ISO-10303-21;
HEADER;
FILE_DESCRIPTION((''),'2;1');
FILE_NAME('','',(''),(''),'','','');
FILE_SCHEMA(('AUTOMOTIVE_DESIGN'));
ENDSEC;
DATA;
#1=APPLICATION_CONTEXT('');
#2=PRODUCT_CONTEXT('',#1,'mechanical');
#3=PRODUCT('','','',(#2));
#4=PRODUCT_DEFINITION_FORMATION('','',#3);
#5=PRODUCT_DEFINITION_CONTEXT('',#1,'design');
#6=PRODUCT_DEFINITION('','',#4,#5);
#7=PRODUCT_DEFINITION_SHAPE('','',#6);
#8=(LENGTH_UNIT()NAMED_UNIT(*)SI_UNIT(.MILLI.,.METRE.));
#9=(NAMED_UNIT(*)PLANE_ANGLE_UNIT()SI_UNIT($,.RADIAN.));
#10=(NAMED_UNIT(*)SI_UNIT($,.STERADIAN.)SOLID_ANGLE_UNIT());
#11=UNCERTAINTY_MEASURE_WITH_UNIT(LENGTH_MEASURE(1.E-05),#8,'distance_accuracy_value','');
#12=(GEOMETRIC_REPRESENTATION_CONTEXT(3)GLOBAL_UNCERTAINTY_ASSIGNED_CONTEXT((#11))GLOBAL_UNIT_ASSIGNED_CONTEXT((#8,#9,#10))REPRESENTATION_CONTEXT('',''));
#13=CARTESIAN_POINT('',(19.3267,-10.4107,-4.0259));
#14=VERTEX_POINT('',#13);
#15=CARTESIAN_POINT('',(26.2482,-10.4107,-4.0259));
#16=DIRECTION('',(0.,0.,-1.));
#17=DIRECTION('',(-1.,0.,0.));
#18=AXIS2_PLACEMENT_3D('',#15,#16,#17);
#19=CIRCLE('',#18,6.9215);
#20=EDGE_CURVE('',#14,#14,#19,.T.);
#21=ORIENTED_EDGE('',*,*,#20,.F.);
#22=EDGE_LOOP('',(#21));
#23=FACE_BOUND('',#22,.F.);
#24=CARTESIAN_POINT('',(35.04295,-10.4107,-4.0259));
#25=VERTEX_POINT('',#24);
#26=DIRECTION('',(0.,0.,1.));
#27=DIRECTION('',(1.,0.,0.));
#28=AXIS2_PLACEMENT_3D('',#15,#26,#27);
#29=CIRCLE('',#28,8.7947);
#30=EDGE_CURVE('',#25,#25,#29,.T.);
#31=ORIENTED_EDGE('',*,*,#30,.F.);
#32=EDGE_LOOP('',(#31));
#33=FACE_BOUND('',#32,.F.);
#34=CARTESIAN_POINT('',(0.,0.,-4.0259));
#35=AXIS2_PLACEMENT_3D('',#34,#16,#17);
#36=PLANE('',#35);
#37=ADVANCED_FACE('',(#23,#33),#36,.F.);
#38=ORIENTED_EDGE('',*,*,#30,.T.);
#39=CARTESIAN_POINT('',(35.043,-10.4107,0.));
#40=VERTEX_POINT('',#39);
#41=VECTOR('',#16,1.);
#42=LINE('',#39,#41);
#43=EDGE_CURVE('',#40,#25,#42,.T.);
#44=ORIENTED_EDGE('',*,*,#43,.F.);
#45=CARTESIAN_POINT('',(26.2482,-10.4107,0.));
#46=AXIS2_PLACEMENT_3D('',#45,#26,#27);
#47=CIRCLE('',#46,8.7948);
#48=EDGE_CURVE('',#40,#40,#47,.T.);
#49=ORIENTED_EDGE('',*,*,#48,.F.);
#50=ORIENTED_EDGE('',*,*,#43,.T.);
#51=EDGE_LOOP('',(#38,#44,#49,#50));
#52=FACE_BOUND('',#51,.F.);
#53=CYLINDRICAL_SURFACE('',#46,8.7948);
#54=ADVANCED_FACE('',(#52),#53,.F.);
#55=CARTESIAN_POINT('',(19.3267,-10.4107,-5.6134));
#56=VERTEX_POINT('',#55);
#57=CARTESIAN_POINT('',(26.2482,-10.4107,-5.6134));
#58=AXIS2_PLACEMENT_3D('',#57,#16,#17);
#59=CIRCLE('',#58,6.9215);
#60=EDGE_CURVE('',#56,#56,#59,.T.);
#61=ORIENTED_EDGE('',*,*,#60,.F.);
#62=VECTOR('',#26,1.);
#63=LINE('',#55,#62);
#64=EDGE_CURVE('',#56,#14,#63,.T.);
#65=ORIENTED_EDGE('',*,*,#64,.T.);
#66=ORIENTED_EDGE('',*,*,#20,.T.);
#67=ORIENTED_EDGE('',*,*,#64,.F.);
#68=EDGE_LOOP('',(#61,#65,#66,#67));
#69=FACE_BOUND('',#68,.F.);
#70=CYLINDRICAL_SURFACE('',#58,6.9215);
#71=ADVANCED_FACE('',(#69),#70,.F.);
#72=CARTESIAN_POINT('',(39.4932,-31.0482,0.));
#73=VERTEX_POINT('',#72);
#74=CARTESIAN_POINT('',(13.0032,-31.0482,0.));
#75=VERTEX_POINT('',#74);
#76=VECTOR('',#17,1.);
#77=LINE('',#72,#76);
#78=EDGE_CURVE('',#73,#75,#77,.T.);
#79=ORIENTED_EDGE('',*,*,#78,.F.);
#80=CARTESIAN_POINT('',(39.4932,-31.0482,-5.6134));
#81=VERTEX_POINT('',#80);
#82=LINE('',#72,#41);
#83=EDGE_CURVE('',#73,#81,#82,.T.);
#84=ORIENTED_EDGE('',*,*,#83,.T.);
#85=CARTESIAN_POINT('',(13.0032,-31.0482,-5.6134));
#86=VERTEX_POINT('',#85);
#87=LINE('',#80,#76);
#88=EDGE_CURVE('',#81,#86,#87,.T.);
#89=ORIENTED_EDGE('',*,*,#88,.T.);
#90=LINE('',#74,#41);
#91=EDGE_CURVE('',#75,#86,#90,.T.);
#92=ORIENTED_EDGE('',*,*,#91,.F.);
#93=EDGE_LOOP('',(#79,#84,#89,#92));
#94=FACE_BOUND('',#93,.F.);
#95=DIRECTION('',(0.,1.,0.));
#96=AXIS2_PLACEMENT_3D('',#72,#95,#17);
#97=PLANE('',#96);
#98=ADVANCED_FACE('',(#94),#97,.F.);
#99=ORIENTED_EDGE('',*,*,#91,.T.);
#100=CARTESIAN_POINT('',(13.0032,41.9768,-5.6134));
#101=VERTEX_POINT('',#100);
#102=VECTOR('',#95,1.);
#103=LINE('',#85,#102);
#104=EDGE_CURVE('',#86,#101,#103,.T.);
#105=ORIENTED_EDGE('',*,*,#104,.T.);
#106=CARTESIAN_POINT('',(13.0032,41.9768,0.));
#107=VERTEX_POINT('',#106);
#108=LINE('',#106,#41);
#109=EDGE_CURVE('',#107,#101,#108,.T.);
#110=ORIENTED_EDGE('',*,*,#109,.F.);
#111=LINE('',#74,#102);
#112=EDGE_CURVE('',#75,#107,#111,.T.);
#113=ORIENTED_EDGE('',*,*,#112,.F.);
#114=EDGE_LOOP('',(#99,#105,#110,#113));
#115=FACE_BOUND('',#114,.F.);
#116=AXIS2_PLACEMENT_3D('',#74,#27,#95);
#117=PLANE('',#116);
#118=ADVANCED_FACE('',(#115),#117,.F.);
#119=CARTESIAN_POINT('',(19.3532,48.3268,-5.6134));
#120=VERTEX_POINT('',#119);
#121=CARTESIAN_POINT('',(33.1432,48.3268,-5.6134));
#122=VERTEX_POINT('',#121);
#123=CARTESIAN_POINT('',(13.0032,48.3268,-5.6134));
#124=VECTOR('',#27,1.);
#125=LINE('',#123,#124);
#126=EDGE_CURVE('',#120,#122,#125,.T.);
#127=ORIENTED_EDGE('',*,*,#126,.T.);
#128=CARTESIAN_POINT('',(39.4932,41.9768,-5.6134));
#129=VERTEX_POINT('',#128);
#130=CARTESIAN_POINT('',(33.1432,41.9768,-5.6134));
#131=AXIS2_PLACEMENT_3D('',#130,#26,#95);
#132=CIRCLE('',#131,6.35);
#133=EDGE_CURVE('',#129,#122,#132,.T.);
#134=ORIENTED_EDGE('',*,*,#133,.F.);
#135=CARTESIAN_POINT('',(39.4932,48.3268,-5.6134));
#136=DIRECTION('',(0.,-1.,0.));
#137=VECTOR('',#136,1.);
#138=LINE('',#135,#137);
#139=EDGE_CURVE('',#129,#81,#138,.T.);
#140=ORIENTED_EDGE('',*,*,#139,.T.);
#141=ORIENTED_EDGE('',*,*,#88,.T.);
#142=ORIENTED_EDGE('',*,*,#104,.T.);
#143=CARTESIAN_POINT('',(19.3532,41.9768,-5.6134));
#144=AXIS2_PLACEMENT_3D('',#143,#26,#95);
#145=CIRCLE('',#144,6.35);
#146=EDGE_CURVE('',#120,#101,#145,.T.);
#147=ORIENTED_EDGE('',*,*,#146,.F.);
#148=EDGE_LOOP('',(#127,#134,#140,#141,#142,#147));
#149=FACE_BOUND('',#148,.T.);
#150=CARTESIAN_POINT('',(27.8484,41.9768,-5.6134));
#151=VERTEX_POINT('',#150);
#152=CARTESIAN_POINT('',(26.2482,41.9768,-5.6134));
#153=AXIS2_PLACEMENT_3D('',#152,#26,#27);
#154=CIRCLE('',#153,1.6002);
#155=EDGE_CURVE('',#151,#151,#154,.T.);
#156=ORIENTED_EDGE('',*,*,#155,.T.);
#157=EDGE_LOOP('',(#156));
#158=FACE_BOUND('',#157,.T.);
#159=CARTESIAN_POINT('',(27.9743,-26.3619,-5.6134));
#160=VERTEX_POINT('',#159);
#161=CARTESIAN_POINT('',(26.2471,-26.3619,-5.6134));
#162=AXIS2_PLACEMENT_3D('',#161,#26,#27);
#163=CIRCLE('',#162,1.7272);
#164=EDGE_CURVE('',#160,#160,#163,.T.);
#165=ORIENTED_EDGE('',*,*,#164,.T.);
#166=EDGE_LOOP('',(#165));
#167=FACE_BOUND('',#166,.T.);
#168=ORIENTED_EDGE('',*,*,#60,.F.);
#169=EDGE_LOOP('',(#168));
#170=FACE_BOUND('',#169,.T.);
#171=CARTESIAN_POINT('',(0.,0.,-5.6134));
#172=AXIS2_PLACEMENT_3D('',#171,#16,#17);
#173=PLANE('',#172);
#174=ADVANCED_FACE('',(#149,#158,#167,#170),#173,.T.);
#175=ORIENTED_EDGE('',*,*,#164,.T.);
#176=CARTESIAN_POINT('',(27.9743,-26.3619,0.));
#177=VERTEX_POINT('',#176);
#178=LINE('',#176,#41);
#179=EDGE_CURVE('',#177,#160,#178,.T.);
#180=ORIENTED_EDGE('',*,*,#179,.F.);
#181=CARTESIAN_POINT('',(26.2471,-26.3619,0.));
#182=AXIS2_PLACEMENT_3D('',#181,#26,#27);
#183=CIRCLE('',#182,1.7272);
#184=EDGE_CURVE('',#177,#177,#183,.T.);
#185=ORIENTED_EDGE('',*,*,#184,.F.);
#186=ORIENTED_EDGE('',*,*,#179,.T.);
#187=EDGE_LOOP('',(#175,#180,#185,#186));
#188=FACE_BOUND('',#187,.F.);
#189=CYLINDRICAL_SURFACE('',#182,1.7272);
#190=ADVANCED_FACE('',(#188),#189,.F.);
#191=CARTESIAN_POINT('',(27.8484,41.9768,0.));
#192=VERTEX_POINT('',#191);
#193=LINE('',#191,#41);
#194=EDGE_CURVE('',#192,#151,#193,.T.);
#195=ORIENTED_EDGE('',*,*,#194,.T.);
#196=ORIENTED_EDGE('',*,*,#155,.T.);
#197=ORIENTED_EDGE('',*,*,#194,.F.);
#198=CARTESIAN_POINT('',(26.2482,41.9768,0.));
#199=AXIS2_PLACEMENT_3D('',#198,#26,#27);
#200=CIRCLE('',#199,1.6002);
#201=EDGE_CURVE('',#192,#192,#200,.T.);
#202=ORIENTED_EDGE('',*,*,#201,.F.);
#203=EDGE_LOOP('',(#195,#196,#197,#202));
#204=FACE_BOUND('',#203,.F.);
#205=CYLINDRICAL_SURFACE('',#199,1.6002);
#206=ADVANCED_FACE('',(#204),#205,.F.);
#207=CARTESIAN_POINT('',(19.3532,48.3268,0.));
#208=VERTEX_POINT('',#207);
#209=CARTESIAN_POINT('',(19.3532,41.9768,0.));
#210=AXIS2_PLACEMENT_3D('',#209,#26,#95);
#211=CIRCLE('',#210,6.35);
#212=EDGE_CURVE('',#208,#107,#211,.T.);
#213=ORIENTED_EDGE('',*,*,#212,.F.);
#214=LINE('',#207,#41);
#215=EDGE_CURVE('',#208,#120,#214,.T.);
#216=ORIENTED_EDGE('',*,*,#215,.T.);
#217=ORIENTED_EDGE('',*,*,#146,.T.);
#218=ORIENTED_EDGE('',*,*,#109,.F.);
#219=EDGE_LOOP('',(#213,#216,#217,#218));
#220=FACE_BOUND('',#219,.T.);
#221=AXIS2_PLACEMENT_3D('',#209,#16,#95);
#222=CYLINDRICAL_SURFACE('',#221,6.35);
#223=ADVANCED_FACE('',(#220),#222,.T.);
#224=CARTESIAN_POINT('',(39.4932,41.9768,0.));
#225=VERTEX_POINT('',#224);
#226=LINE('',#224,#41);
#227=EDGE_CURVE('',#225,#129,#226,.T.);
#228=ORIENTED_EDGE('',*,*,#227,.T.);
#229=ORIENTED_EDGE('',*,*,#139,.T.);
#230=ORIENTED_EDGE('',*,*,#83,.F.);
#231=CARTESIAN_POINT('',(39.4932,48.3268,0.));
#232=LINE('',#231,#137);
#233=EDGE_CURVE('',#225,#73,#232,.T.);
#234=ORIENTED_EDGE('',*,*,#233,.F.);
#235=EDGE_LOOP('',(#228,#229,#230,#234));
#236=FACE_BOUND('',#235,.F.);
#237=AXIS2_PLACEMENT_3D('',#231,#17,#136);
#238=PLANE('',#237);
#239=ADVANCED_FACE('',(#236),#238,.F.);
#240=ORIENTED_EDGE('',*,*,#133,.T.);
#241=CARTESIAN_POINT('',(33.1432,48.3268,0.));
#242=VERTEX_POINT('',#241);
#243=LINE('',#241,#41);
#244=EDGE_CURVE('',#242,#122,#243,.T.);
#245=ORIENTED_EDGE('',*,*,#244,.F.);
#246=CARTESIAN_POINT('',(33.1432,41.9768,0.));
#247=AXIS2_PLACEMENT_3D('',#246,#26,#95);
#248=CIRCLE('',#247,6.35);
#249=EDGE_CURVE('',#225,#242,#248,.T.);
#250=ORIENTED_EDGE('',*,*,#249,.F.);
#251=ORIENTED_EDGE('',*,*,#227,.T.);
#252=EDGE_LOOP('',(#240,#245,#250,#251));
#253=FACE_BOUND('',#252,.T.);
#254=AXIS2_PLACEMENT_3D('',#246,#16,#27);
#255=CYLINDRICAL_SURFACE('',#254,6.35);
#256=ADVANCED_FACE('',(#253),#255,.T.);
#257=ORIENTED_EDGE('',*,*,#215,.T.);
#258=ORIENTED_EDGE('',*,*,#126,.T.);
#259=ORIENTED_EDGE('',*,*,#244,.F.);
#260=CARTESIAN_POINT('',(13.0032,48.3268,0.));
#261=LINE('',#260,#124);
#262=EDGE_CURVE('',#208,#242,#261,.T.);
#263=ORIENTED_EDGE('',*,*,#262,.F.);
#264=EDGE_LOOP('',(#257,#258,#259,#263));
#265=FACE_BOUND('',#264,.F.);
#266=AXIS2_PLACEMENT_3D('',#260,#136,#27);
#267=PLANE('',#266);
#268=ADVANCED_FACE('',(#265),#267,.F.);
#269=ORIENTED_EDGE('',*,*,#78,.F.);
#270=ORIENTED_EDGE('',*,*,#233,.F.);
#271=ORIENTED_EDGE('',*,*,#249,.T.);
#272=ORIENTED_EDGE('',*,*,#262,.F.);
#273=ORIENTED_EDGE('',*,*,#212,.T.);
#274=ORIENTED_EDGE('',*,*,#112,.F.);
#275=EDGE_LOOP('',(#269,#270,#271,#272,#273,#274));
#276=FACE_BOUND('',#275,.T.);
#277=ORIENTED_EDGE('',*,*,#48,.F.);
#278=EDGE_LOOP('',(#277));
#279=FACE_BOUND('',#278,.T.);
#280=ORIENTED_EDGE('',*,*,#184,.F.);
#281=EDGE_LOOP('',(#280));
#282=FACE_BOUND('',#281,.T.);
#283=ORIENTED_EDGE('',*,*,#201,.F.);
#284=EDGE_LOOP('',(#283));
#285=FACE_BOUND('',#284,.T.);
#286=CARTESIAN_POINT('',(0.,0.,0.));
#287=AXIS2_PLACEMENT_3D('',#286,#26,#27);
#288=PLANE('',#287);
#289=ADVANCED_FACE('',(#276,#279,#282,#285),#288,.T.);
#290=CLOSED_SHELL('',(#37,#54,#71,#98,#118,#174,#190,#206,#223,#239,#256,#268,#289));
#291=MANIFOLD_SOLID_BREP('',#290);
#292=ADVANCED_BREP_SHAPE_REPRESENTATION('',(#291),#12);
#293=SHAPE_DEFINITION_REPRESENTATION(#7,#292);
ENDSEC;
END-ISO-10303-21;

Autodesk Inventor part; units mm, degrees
ref_plane "YZ Plane" through (0, 0, 0) normal (1, 0, 0) x (0, 1, 0)
ref_plane "XZ Plane" through (0, 0, 0) normal (0, 1, 0) x (-1, 0, 0)
ref_plane "XY Plane" through (0, 0, 0) normal (0, 0, 1) x (1, 0, 0)
sketch "Sketch1" plane through (0, 0, 0) normal (0, 0, 1) x (1, 0, 0)
  line L0 (18.6455, 5.0782) -> (18.6456, 5.0782)
  circle A0 centre (26.2482, -10.4107) radius 8.7948
  line L1 (39.4932, 48.3268) -> (39.4932, -31.0482)
  line L2 (13.0032, -31.0482) -> (13.0032, 48.3268)
  line L3 (13.0032, 48.3268) -> (39.4932, 48.3268)
  line L4 (39.4932, -31.0482) -> (13.0032, -31.0482)
  circle A1 centre (26.2471, -24.96) radius 1.5875
  point P0 (0, 0)
  dimension "d0" = 17.5895
  dimension "d3" = 26.49
  dimension "d4" = 13.245
  dimension "d5" = 58.7375
  dimension "d6" = 79.375
  dimension "d15" = 3.175
  dimension "d25" = 26.49
  dimension "d26" = 13.2461
extrude "Extrusion1" add sketch "Sketch1" against normal blind 5.6134 contours L1 L4 L2 L3 | A1
sketch "Sketch2" plane through (0, 0, 0) normal (0, 0, 1) x (1, 0, 0)
  line L0 (13.0032, 48.3268) -> (39.4932, 48.3268) projected
  circle A0 centre (26.2482, 41.9768) radius 1.6002
  point P0 (0, 0)
  point P1 (0, 0)
  dimension "d10" = 3.2004
  dimension "d12" = 6.35
extrude "Extrusion2" cut sketch "Sketch2" against normal blind 5.6134
sketch "Sketch3" plane through (0, 0, 0) normal (0, 0, 1) x (1, 0, 0)
  circle A0 centre (26.2482, -10.4107) radius 8.7947 projected
  circle A1 centre (26.2471, -26.3619) radius 1.7272
  line L0 (39.4932, 48.3268) -> (39.4932, -31.0482) projected
  point P0 (0, 0)
  dimension "d17" = 3.4544
  dimension "d18" = 15.9512
  dimension "d27" = 13.2461
extrude "Extrusion3" cut sketch "Sketch3" against normal blind 5.6134 contours A1
fillet "Fillet1" radius 6.35 2 edges at (13.0032, 48.3268, -2.8067) (39.4932, 48.3268, -2.8067)
sketch "Sketch5" plane through (0, 0, -5.6134) normal (0, 0, -1) x (-1, 0, 0)
  circle A0 centre (-26.2482, -10.4107) radius 8.7947 projected
  circle A1 centre (-26.2482, -10.4107) radius 6.9215
  point P0 (0, 0)
  dimension "d28" = 13.843
extrude "Extrusion5" add sketch "Sketch5" against normal blind 1.5875
properties part number "Lidar Sensor Case v4 Piece 1"
